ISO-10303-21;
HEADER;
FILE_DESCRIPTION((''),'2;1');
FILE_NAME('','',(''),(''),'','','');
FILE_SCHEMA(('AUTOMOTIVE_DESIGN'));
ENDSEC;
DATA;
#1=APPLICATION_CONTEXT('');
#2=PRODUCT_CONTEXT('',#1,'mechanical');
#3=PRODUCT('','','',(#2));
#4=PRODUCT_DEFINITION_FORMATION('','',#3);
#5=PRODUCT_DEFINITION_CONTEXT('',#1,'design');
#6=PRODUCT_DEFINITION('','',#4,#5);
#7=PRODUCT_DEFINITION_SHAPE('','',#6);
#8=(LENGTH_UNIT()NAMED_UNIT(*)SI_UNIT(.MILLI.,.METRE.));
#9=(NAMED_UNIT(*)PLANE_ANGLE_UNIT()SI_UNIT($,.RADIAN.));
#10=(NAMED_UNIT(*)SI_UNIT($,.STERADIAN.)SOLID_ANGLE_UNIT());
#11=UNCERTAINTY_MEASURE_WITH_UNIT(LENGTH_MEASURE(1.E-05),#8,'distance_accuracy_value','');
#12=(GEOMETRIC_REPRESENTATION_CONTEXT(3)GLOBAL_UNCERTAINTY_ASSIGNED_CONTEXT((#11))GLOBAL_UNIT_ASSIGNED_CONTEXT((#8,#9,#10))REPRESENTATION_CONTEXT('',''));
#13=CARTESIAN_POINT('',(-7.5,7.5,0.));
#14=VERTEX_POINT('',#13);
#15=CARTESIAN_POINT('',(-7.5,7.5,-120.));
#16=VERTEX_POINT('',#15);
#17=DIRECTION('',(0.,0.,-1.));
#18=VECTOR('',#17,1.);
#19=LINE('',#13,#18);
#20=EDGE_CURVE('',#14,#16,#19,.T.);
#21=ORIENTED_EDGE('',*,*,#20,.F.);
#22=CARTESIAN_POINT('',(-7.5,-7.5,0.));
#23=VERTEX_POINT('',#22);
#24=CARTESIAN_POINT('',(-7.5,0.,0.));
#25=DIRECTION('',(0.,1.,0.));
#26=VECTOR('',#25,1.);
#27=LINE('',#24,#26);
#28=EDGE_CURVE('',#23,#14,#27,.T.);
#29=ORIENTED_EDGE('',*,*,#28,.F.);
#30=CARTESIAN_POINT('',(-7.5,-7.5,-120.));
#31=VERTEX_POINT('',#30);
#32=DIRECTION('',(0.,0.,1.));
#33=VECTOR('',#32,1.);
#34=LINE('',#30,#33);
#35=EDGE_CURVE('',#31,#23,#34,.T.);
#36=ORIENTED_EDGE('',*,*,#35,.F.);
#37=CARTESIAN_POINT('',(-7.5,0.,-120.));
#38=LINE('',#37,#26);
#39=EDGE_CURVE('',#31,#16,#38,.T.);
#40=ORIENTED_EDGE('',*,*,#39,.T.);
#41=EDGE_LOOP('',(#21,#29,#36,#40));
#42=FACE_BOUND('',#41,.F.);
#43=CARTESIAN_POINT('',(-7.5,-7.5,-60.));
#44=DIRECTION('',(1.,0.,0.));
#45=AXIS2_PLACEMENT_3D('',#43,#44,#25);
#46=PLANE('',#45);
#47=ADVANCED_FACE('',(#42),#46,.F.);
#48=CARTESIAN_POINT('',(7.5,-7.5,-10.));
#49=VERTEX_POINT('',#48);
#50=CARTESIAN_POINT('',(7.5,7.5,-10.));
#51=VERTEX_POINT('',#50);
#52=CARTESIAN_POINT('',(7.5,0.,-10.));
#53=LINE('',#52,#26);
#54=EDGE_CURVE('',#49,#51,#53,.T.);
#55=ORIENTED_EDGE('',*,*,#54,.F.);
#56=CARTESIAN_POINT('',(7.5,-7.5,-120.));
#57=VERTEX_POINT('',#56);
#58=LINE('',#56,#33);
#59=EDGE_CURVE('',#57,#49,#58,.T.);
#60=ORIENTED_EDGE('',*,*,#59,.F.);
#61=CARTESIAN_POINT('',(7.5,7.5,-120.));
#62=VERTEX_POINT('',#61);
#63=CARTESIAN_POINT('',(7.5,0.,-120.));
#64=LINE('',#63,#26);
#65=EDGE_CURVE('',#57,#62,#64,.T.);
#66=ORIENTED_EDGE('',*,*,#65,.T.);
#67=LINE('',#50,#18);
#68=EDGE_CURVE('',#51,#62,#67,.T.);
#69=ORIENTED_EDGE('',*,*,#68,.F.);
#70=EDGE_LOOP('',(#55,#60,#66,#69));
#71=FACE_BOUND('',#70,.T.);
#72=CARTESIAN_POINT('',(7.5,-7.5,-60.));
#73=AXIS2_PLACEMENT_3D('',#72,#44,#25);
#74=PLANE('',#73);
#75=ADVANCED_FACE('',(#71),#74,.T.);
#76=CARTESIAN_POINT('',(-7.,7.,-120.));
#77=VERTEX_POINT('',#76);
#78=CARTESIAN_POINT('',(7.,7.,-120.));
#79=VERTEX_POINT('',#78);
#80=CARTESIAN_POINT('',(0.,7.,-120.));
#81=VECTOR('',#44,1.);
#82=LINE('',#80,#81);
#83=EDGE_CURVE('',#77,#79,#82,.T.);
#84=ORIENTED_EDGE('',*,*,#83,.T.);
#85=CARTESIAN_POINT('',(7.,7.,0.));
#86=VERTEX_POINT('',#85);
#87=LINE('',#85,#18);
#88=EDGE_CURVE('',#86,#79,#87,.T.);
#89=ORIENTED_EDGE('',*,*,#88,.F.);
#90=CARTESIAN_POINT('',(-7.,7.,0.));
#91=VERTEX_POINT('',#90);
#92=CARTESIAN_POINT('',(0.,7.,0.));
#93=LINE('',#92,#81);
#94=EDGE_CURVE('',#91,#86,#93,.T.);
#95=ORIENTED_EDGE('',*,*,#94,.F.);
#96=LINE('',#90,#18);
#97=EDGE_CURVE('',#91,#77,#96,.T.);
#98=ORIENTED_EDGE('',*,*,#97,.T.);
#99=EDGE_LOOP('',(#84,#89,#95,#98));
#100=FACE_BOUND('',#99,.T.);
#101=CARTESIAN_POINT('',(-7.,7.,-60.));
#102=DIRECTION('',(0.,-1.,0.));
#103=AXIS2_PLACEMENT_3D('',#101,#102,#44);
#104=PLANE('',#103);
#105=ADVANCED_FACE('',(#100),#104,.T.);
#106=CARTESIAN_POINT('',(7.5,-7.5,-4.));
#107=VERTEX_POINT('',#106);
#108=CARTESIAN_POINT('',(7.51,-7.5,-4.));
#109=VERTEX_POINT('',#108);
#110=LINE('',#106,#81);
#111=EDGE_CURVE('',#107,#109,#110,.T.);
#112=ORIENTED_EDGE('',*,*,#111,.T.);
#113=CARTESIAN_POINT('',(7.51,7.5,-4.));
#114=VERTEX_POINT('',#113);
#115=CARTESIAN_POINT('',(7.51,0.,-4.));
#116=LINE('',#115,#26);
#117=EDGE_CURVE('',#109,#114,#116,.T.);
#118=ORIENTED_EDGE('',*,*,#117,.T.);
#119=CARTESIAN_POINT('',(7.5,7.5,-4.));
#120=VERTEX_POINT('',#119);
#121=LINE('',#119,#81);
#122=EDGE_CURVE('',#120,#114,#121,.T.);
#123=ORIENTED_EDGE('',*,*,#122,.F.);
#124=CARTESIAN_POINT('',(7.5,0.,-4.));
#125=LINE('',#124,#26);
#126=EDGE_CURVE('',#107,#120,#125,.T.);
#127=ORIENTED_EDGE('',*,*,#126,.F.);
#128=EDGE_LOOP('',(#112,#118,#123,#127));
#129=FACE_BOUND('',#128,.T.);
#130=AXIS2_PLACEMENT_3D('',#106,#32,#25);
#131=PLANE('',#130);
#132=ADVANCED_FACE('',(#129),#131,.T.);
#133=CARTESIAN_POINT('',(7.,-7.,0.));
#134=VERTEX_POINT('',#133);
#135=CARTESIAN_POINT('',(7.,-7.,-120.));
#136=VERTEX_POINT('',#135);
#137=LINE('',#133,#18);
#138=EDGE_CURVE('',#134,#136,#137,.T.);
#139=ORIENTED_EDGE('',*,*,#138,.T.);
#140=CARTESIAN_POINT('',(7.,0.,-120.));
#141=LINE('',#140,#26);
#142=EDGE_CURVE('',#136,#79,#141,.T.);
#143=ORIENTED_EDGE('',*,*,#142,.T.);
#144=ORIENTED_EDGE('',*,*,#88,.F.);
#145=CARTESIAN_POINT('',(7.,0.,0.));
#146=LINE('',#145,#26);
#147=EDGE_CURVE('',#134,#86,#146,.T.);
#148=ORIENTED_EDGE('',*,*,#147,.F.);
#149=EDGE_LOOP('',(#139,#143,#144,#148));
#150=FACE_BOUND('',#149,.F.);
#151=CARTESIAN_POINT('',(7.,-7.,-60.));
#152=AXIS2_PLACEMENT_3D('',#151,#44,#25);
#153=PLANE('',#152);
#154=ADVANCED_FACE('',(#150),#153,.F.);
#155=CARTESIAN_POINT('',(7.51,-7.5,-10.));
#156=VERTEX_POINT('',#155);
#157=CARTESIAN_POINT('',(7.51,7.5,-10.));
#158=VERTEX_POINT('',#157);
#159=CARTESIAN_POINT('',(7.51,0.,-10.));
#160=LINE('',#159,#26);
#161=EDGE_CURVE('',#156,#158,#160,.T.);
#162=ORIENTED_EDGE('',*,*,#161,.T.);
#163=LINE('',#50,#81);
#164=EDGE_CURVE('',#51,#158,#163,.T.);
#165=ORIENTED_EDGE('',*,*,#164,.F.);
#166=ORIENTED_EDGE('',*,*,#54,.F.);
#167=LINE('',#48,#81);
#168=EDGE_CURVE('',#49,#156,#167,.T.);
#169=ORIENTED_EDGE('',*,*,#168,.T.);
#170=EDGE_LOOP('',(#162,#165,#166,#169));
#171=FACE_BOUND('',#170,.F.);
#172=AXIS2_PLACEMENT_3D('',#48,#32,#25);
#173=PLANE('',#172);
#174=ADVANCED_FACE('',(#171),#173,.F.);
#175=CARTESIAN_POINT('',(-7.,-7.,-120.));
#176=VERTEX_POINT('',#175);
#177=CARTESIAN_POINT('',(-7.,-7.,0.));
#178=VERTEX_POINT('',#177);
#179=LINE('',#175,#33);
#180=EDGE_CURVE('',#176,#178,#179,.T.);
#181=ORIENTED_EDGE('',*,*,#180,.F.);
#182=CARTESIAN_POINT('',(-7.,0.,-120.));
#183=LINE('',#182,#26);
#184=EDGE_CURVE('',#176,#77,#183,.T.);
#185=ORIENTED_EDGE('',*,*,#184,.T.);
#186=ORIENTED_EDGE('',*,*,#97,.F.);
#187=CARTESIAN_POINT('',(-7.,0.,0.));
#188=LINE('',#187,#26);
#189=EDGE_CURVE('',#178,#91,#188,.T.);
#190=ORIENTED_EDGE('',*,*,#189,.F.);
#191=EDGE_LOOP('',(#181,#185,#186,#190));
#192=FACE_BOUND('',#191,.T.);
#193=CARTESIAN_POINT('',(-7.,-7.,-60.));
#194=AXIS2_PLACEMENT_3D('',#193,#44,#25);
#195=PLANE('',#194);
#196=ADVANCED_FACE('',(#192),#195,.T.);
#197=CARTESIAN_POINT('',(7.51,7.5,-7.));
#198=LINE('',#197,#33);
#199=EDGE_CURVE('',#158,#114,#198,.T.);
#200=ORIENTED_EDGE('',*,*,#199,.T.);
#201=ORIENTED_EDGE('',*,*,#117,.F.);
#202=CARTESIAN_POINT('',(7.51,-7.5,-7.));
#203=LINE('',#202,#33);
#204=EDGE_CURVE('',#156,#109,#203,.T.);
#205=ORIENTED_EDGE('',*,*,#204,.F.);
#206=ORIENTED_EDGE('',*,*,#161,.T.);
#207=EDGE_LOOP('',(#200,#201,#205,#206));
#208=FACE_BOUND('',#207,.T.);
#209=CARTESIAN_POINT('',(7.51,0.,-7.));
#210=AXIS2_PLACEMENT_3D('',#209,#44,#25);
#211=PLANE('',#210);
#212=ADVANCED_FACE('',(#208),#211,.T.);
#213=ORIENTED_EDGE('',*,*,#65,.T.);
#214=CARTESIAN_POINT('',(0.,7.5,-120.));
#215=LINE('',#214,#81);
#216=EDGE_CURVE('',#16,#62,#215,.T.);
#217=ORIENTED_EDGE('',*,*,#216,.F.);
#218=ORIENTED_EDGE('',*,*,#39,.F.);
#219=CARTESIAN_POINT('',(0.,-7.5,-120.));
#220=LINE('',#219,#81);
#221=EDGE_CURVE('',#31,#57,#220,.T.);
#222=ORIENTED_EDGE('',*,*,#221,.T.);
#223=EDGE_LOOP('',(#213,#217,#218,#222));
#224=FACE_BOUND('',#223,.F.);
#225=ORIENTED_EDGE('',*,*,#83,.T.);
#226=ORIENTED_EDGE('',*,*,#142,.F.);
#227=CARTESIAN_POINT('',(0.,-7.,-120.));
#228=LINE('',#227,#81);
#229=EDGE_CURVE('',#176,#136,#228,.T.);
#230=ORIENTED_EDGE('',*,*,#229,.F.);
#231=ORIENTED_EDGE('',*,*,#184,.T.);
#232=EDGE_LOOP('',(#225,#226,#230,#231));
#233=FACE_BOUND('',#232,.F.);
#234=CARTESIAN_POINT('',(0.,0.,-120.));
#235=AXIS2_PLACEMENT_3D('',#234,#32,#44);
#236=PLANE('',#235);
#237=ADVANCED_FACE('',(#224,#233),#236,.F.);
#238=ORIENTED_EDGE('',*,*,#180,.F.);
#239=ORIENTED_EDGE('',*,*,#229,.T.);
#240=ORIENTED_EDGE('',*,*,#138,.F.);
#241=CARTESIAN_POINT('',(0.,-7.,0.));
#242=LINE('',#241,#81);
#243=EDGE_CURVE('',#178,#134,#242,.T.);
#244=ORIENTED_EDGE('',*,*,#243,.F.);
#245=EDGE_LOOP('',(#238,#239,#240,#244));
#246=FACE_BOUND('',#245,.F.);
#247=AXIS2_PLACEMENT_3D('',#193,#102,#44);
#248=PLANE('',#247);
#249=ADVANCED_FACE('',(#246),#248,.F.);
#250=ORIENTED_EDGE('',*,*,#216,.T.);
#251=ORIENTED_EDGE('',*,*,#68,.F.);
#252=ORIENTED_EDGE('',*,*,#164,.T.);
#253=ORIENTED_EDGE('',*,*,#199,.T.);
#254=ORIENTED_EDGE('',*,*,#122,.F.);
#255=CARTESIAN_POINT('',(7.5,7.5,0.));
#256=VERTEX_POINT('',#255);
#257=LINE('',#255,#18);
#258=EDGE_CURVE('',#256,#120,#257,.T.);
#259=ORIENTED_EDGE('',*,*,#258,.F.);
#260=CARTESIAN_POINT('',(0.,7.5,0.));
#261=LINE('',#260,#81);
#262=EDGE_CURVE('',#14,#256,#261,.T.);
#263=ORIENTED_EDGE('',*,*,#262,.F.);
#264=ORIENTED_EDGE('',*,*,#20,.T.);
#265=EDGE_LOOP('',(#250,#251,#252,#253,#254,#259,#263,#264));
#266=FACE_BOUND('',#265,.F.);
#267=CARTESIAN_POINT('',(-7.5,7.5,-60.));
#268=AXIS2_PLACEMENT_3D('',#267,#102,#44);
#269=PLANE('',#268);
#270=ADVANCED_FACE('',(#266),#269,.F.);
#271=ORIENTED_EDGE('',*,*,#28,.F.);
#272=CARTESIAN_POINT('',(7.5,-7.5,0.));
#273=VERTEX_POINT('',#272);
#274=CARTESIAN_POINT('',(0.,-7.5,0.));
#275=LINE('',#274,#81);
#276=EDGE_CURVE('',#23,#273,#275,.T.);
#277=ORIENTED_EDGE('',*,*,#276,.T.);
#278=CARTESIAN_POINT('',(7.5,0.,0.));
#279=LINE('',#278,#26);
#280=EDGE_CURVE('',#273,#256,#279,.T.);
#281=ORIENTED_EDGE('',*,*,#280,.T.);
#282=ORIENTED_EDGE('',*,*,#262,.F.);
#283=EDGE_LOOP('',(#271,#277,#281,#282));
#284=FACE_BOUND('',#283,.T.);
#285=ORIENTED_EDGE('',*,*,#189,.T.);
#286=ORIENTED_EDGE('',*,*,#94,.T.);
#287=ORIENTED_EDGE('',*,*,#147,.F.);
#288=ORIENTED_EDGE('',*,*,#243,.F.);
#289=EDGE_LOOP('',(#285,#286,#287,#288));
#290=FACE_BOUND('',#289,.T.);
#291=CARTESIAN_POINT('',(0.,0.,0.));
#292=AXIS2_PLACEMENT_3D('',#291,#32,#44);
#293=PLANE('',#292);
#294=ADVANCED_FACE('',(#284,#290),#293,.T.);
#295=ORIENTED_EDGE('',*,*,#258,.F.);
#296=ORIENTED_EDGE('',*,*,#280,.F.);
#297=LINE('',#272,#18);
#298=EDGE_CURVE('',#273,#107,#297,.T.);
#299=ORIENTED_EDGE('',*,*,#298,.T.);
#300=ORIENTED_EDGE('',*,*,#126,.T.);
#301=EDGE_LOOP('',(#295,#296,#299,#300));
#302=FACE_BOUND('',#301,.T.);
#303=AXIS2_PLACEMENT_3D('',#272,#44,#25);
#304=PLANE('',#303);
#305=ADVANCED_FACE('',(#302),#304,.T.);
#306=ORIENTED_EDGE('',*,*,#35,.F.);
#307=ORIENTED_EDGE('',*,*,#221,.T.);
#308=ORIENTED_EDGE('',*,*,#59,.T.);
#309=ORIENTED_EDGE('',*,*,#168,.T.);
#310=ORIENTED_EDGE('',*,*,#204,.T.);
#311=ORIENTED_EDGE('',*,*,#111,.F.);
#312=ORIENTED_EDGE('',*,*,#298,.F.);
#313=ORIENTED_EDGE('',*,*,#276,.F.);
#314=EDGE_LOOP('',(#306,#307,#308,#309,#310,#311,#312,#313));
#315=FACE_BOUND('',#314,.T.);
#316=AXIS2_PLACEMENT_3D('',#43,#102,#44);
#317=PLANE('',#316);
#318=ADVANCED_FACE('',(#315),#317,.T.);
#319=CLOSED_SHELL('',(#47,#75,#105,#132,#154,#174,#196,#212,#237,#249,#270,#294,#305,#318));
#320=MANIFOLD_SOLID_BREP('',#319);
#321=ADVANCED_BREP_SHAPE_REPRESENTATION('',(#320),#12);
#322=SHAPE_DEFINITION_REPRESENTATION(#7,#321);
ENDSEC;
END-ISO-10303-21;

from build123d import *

# Parameters (mm, degrees)
F0_W     = 15
F0_H     = 15
F0_W_2   = 14
F0_H_2   = 14
F1_DEPTH = 60
F2_W     = 15
F2_H     = 6
F3_DEPTH = 0.01
F4_DEPTH = 60


with BuildPart() as f1:
    # F0 (on Top) → F1 (new body)
    with BuildSketch(Plane.XY):
        Rectangle(F0_W, F0_H)
        Rectangle(F0_W_2, F0_H_2, mode=Mode.SUBTRACT)
    extrude(amount=-F1_DEPTH)

    # F2 (on face) → F3 (join)
    with BuildSketch(Plane.YZ.offset(7.5)):
        with Locations((0, -7)):
            Rectangle(F2_W, F2_H)
    extrude(amount=F3_DEPTH)

    # F4 (add): a face of the model
    f4_faces = [f1.faces().sort_by_distance(p)[0] for p in [
        (0, -7.2878679656, -60),
    ]]
    extrude(f4_faces, amount=F4_DEPTH)


solid = f1.part
